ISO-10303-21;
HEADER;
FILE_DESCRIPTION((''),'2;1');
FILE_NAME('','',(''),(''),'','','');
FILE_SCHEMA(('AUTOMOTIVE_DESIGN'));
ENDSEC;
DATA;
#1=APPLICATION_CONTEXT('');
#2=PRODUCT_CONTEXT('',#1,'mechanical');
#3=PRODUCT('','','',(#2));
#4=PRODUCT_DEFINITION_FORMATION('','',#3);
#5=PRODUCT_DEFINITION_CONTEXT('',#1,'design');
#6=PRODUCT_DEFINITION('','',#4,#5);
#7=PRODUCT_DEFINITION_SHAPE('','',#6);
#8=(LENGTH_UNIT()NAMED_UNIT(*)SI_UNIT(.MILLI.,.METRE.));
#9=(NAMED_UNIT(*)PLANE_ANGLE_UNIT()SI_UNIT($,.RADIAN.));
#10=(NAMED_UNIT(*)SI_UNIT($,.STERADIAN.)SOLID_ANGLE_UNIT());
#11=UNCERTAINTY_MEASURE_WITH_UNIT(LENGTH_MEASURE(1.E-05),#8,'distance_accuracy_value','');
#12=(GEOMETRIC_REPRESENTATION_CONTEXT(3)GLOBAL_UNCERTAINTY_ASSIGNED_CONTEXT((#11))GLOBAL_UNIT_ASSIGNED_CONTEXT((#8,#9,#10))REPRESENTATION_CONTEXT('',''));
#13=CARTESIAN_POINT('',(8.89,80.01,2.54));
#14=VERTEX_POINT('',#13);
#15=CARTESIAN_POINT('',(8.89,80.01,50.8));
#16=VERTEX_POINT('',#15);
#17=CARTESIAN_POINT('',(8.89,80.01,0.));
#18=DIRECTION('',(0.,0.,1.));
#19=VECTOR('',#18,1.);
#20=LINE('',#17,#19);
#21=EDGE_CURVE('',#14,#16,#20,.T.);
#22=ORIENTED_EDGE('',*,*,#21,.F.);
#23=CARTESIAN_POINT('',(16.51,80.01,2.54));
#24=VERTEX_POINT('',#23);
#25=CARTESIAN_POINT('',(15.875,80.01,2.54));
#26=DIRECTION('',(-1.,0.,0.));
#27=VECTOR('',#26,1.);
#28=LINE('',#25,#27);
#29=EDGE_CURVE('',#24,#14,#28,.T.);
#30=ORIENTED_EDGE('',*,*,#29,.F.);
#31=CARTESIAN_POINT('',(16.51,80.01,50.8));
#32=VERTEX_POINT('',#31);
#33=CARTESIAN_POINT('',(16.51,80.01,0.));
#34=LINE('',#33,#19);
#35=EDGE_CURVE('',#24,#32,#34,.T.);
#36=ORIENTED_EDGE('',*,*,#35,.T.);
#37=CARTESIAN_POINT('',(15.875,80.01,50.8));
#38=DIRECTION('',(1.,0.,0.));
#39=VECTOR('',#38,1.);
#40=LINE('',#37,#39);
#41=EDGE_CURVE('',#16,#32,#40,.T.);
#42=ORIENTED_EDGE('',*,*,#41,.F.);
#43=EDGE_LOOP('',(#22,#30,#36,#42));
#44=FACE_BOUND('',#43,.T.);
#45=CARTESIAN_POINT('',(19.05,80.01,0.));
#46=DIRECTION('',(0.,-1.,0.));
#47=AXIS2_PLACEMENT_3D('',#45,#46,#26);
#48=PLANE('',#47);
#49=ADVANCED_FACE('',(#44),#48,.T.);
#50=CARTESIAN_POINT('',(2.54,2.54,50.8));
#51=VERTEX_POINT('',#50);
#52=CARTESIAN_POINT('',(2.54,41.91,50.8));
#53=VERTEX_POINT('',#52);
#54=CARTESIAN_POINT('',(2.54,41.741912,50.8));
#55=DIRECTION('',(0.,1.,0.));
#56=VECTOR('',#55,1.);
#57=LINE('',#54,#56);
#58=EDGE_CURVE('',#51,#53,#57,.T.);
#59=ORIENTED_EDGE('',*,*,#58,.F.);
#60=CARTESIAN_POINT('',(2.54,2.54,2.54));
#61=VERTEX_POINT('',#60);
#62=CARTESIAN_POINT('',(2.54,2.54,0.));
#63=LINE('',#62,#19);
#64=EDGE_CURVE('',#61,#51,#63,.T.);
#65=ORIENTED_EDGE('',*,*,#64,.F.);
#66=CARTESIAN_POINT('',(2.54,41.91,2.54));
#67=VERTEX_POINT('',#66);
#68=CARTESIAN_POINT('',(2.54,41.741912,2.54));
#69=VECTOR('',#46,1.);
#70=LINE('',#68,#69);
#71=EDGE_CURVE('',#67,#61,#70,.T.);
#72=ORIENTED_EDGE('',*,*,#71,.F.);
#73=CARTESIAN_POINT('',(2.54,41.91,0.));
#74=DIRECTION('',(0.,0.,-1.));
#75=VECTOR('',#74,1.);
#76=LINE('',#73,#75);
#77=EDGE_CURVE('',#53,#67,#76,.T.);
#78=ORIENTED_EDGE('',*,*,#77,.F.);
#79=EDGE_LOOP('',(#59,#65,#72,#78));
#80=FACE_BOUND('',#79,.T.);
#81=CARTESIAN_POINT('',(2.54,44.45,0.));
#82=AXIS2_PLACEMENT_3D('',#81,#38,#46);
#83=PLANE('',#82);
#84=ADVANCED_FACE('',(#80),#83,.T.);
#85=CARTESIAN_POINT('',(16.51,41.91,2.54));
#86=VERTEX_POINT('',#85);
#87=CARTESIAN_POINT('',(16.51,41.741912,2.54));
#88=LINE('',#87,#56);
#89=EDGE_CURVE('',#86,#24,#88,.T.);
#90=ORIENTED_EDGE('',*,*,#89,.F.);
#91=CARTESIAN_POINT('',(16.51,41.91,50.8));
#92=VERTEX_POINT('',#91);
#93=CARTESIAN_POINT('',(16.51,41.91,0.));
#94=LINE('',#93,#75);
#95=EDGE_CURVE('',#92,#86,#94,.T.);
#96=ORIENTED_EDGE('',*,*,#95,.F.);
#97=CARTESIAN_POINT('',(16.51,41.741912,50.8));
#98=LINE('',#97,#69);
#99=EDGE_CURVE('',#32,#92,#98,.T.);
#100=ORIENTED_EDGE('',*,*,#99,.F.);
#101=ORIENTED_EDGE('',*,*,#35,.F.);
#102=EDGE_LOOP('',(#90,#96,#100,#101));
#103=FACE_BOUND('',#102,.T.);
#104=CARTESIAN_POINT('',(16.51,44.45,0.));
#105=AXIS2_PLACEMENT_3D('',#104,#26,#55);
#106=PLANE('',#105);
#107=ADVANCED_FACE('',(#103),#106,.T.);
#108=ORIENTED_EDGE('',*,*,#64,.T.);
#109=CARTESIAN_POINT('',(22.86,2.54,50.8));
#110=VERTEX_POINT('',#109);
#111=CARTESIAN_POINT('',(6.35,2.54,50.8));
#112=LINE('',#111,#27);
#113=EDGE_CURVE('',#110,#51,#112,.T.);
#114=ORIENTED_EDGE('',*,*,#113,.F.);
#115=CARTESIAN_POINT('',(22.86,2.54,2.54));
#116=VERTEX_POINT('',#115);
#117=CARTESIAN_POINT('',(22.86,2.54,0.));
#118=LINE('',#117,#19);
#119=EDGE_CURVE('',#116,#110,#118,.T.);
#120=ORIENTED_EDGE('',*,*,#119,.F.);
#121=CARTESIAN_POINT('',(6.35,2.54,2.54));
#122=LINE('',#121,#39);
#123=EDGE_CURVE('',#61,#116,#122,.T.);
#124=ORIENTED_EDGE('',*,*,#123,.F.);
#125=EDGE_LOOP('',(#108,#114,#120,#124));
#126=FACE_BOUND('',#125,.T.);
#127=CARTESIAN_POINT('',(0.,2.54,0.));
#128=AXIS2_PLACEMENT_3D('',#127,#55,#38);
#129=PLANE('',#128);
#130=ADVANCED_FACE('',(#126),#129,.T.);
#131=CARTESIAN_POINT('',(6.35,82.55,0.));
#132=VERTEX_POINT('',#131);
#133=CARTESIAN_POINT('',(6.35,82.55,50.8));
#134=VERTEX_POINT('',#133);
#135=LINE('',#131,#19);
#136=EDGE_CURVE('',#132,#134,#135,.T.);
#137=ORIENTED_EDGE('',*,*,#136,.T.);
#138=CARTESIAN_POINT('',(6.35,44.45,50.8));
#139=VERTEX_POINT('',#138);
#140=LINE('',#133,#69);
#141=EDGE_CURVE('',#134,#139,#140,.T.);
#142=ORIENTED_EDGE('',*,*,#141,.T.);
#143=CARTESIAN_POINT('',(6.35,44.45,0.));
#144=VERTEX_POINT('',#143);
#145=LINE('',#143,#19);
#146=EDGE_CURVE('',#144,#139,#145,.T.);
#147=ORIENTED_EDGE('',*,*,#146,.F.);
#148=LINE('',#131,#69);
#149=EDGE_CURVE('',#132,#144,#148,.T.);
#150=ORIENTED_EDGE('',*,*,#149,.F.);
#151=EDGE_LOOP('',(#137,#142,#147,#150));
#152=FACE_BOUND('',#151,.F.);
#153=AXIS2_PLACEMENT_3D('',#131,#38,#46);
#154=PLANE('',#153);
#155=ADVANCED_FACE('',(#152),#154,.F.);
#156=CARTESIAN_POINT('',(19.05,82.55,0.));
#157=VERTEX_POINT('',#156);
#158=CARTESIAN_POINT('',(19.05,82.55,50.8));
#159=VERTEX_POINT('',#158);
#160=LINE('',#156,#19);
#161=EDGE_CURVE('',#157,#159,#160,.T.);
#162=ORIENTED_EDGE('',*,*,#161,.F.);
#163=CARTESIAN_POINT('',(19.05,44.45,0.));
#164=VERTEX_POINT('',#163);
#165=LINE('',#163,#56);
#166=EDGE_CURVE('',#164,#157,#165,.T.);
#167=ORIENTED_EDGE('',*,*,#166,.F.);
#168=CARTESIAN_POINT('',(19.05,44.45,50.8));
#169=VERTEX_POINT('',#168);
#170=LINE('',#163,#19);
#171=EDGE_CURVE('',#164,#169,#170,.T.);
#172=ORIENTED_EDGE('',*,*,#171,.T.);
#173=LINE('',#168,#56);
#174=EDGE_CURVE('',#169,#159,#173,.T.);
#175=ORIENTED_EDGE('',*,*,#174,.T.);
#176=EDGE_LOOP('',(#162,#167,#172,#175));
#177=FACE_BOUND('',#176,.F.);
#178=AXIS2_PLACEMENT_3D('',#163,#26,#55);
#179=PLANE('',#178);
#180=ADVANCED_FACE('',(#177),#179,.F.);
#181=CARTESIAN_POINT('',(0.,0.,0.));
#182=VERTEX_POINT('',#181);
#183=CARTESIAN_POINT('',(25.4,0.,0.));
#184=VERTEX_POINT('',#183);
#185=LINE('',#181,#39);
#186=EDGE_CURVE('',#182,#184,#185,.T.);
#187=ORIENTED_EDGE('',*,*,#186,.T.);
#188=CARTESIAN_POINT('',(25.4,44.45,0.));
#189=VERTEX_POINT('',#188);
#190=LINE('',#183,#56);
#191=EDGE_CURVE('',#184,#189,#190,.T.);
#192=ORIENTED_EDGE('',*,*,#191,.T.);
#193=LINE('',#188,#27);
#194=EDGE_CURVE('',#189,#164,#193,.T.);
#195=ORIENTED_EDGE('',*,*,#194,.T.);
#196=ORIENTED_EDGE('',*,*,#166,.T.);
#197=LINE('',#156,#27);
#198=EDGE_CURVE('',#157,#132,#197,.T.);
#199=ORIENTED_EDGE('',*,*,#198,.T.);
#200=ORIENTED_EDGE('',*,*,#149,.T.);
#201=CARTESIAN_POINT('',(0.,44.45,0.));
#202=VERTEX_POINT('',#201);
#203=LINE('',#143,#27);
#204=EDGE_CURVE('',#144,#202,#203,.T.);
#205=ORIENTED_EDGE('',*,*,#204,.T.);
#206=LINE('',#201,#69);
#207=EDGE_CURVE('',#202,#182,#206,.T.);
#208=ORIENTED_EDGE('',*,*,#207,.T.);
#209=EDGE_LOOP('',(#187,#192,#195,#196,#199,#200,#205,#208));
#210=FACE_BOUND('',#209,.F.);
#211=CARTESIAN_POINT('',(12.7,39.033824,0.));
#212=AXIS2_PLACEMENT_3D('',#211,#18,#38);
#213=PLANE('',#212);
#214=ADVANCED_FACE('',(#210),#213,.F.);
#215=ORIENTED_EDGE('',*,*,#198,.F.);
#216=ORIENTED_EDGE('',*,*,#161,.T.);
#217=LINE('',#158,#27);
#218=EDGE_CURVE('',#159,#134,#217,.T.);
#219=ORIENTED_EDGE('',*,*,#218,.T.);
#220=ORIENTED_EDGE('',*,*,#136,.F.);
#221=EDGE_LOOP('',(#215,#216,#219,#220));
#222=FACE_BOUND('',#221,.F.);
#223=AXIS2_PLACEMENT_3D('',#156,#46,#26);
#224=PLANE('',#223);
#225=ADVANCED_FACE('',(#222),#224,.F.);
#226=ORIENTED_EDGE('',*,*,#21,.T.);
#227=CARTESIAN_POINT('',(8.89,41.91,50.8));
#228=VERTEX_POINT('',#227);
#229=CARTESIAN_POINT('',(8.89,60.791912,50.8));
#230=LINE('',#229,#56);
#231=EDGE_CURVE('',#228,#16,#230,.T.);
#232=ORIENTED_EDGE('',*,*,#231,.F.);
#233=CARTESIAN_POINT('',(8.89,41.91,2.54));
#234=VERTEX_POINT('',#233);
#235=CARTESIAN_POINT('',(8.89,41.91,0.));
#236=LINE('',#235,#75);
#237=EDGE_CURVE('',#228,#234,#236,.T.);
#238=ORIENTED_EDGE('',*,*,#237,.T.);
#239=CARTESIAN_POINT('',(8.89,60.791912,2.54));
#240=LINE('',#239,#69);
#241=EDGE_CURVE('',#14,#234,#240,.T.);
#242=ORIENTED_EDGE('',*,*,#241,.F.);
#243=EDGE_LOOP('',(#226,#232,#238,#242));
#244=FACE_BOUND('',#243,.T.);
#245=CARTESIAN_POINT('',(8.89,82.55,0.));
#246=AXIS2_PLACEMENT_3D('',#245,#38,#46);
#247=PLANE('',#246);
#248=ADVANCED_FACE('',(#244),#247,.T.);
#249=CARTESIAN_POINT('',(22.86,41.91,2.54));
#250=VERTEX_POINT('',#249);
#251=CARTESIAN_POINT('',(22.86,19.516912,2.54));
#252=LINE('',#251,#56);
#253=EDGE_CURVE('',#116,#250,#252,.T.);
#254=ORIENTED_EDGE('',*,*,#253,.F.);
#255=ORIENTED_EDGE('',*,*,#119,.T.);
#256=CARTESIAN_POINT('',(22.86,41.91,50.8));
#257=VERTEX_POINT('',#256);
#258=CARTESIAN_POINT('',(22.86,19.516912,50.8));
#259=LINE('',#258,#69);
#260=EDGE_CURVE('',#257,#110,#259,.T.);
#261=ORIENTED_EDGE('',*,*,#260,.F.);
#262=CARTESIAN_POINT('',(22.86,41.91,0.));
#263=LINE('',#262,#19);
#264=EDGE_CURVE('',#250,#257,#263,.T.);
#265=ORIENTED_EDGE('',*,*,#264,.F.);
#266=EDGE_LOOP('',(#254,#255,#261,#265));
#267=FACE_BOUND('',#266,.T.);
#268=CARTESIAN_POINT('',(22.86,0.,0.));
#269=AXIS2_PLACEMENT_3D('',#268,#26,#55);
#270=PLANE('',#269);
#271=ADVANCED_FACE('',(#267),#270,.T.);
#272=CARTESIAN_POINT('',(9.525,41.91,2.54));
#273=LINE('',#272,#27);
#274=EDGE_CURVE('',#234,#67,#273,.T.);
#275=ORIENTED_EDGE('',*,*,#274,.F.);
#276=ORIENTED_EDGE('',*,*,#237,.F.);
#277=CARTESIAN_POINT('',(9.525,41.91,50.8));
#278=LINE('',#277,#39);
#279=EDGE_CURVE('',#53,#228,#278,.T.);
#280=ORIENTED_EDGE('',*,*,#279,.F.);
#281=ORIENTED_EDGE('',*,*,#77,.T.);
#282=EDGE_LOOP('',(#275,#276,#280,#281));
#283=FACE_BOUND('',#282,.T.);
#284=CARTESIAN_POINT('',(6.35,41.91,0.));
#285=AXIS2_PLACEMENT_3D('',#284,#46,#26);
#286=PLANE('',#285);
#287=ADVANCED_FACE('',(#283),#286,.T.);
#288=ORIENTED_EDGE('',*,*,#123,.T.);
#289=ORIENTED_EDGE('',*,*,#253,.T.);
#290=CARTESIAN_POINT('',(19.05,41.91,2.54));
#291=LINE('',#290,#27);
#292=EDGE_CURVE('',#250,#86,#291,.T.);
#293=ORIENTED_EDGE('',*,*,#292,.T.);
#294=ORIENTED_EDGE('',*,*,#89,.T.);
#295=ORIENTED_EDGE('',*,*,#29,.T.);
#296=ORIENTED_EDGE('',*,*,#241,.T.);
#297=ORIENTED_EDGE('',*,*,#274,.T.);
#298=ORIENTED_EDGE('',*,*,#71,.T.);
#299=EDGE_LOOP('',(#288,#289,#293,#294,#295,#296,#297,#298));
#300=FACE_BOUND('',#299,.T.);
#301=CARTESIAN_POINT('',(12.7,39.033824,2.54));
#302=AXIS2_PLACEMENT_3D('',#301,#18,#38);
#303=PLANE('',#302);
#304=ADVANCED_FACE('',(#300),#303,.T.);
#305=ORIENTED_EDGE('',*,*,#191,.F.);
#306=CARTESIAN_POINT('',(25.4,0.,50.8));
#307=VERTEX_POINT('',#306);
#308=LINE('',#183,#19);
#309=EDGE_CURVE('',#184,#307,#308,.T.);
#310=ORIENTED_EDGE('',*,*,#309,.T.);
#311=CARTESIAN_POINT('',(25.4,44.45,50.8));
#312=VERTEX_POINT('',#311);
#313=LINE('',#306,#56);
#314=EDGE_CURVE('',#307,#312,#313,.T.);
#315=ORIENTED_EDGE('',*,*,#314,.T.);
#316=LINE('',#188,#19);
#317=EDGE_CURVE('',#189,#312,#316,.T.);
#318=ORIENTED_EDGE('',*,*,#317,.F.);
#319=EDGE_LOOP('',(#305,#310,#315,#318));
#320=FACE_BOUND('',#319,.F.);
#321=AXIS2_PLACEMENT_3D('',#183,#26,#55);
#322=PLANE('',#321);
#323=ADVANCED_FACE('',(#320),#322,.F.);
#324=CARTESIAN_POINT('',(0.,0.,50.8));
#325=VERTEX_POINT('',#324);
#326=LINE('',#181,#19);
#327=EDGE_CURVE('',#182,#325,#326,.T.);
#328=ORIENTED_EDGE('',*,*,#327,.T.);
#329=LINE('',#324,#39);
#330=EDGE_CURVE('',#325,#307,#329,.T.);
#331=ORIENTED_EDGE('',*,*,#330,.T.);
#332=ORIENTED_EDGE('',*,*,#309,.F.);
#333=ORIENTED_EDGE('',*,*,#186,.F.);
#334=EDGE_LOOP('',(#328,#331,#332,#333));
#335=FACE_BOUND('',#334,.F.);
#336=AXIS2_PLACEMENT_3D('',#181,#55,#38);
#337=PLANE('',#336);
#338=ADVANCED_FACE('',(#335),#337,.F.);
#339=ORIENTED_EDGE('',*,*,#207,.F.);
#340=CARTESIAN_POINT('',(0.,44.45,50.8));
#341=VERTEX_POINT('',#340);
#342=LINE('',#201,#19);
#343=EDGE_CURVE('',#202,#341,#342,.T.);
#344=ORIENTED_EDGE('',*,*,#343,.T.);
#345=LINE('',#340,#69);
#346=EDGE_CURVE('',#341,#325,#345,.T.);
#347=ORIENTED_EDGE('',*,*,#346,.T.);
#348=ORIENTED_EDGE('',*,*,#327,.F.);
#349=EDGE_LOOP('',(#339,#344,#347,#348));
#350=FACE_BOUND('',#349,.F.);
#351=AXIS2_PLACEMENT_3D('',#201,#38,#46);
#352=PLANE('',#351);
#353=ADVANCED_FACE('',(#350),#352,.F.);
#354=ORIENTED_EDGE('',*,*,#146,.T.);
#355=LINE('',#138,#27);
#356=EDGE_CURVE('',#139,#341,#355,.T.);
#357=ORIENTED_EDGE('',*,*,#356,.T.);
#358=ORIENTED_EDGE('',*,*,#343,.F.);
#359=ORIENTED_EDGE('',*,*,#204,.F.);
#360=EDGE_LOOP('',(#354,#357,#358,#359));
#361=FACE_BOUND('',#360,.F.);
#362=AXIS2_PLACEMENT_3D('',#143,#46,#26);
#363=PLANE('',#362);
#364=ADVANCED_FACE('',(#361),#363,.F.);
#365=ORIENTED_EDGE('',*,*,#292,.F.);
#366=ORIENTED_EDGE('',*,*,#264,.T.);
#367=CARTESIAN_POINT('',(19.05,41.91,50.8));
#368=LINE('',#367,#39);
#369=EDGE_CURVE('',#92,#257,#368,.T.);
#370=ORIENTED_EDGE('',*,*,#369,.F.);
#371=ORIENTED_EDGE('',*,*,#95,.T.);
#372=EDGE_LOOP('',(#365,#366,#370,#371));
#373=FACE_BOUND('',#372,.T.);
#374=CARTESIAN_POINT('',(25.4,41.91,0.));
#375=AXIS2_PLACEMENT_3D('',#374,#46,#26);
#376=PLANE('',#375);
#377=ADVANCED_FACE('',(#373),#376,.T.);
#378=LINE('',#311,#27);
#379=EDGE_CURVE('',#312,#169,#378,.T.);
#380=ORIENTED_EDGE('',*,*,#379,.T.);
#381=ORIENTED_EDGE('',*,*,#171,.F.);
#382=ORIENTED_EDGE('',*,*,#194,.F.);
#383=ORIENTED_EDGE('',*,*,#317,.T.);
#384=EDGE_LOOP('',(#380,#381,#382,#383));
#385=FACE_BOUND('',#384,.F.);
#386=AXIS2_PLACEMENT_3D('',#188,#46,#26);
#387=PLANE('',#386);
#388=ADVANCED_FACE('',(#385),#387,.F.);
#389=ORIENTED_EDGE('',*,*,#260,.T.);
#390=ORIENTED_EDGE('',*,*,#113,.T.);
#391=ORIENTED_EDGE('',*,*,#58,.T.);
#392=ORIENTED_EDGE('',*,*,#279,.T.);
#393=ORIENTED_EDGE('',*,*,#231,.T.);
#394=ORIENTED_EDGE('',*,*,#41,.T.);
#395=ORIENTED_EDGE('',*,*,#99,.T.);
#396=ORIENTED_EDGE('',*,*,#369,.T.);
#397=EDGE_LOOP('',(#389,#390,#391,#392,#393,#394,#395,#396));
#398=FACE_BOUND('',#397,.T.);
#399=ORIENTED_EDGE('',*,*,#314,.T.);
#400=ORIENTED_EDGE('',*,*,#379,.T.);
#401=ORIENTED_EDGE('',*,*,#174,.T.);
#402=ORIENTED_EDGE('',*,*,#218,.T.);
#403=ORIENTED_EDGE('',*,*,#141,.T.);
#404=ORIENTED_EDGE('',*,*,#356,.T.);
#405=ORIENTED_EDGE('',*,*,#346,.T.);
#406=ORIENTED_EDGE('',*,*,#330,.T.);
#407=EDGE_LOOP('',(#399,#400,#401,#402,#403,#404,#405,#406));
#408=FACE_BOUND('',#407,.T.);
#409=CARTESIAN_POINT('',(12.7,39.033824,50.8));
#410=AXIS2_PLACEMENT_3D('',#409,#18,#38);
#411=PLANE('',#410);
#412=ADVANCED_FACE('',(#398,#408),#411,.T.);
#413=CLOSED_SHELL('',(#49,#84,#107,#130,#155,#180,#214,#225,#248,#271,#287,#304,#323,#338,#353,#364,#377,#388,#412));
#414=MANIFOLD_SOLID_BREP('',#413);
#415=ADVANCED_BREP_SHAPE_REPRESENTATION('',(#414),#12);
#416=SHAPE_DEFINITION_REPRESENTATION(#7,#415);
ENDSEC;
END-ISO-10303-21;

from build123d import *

# Parameters (mm, degrees)
F1_DEPTH = 50.8
F2_T     = -2.54


with BuildPart() as f1:
    # F0 (on Top) → F1 (new body)
    with BuildSketch(Plane.XY):
        Polygon((0, 44.45), (0, 0), (25.4, 0), (25.4, 44.45), (19.05, 44.45), (19.05, 82.55), (6.35, 82.55), (6.35, 44.45), align=None)
    extrude(amount=F1_DEPTH)

    # F2
    f2_openings = [f1.faces().sort_by_distance(p)[0] for p in [
        (12.7, 34.6075, 50.8),
    ]]
    offset(amount=F2_T, openings=f2_openings, kind=Kind.INTERSECTION)


solid = f1.part
